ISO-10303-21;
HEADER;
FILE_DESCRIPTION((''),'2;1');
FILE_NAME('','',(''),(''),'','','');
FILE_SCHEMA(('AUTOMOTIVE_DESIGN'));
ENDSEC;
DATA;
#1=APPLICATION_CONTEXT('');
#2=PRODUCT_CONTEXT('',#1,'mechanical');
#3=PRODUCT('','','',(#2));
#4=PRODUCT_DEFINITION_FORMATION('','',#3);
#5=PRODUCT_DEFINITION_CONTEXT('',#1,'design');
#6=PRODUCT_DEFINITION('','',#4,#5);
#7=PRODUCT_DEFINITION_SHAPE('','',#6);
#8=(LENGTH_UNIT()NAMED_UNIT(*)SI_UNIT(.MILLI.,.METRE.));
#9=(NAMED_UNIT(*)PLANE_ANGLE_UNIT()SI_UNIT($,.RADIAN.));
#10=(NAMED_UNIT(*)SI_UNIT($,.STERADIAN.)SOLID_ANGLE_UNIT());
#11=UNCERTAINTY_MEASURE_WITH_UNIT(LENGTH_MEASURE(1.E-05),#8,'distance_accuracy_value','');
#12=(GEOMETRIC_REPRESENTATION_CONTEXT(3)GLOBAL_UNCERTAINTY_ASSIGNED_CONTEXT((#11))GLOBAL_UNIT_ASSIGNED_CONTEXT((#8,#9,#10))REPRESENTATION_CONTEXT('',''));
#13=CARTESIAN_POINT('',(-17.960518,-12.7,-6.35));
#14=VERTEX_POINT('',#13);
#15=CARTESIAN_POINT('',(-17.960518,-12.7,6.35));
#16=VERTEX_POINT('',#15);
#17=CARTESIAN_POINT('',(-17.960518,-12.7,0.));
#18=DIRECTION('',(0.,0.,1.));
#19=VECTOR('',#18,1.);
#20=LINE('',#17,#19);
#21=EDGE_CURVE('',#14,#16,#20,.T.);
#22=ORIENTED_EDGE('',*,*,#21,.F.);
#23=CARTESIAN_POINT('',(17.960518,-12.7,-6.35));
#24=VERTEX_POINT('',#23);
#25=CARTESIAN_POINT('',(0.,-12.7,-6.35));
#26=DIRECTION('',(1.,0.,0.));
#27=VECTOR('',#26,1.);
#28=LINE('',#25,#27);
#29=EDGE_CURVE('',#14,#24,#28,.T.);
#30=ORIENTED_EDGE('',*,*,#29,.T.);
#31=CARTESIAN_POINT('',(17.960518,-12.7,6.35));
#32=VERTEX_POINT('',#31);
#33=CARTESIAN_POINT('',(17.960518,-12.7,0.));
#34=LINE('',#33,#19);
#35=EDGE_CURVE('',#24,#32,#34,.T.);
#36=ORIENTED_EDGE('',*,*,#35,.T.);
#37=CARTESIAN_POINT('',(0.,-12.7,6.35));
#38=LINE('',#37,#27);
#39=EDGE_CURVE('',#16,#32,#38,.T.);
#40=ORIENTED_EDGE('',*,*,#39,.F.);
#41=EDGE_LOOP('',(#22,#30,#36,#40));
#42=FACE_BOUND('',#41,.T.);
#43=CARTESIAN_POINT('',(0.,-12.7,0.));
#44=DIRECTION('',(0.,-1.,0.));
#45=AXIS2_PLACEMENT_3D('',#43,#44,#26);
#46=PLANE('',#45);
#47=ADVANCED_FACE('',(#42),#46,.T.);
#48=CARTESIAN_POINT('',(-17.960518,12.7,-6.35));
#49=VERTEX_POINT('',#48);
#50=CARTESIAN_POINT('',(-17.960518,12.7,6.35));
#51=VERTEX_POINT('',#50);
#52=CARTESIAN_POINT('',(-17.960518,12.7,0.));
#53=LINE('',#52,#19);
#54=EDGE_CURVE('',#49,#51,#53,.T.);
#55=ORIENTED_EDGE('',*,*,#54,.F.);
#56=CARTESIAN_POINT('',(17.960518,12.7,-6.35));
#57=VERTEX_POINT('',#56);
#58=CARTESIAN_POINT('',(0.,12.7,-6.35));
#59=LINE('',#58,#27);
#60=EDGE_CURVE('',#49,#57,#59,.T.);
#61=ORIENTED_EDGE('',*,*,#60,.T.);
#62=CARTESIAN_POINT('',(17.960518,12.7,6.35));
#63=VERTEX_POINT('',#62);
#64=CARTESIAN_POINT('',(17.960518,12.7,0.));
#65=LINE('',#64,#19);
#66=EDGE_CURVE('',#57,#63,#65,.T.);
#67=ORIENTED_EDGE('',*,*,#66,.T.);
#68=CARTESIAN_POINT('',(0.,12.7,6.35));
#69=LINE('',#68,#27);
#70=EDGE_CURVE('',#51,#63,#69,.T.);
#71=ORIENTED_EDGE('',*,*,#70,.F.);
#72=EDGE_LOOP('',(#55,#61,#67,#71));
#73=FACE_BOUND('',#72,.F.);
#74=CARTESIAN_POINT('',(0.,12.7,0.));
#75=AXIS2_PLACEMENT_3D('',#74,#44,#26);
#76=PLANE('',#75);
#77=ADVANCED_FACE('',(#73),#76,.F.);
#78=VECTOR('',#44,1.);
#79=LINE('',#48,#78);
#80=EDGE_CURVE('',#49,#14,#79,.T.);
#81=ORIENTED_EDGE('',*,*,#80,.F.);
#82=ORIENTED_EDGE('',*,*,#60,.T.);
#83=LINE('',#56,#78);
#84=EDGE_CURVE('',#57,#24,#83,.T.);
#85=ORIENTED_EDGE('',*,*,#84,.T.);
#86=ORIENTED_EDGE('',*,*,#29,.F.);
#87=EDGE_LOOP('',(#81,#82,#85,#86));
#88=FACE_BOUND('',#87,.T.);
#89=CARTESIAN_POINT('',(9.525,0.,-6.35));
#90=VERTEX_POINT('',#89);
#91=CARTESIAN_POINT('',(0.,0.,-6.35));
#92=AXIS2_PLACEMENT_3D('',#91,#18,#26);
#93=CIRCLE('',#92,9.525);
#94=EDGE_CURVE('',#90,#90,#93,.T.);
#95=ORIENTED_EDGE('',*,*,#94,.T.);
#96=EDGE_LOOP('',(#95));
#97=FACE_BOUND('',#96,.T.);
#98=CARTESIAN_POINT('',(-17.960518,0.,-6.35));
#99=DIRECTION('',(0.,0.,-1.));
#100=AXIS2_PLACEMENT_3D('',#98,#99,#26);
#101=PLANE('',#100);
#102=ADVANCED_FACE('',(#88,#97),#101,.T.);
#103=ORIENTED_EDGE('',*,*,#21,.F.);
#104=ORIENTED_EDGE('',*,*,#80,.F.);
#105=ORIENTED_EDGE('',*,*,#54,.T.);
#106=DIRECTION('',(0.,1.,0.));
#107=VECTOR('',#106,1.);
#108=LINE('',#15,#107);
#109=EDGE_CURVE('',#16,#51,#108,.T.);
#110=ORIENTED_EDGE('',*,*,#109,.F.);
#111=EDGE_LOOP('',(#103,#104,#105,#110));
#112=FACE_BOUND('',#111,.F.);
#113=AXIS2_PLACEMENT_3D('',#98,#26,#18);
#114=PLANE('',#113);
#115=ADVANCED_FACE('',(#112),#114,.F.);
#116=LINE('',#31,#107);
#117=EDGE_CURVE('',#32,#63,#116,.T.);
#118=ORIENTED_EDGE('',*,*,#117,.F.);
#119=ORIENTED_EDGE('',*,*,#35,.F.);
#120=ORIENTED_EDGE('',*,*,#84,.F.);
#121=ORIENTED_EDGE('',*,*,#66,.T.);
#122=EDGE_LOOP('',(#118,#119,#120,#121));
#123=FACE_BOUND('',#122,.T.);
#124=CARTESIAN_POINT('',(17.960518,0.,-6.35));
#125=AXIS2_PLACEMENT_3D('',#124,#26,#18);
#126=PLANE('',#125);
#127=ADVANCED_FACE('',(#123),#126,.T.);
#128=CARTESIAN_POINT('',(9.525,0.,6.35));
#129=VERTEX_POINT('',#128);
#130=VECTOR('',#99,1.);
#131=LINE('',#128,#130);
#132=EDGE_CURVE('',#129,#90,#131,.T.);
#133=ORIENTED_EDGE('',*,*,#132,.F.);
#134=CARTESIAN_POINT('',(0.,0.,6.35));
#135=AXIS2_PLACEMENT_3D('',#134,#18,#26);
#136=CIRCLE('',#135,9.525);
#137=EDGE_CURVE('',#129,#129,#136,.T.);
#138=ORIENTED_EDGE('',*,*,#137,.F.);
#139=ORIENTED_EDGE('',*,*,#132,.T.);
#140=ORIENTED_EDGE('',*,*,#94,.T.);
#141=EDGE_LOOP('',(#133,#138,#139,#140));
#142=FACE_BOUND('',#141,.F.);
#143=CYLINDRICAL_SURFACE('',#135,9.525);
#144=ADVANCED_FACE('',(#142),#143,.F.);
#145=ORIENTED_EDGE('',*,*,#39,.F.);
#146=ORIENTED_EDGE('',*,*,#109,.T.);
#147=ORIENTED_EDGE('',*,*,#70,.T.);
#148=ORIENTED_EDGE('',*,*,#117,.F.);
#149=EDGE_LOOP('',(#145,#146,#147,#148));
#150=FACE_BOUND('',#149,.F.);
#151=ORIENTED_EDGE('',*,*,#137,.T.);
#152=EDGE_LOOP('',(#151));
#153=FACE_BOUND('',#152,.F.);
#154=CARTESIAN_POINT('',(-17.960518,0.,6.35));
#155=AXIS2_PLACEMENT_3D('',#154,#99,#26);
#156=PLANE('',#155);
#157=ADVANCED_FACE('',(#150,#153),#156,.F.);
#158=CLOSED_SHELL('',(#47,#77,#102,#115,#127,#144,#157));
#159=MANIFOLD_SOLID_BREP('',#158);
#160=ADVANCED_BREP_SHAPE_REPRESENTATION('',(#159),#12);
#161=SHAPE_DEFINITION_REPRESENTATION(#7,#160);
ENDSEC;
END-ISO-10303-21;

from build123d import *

# Parameters (mm, degrees)
F0_W     = 35.9210356
F0_H     = 12.7
F1_DEPTH = 12.7
F2_R     = 9.525
F3_DEPTH = 12.701


# Not quite as in the source:
# - the program builds the solid bodies; features that only make, move or delete a surface that nothing else refers to are left out


with BuildPart() as f1:
    # F0 (on Front) → F1 (new body, symmetric)
    with BuildSketch(Plane.XZ):
        Rectangle(F0_W, F0_H)
    extrude(amount=F1_DEPTH, both=True)

    # F2 (on face) → F3 (cut, through all)
    with BuildSketch(Plane.XY.offset(6.35)):
        Circle(F2_R)
    extrude(amount=-F3_DEPTH, mode=Mode.SUBTRACT)


solid = f1.part
